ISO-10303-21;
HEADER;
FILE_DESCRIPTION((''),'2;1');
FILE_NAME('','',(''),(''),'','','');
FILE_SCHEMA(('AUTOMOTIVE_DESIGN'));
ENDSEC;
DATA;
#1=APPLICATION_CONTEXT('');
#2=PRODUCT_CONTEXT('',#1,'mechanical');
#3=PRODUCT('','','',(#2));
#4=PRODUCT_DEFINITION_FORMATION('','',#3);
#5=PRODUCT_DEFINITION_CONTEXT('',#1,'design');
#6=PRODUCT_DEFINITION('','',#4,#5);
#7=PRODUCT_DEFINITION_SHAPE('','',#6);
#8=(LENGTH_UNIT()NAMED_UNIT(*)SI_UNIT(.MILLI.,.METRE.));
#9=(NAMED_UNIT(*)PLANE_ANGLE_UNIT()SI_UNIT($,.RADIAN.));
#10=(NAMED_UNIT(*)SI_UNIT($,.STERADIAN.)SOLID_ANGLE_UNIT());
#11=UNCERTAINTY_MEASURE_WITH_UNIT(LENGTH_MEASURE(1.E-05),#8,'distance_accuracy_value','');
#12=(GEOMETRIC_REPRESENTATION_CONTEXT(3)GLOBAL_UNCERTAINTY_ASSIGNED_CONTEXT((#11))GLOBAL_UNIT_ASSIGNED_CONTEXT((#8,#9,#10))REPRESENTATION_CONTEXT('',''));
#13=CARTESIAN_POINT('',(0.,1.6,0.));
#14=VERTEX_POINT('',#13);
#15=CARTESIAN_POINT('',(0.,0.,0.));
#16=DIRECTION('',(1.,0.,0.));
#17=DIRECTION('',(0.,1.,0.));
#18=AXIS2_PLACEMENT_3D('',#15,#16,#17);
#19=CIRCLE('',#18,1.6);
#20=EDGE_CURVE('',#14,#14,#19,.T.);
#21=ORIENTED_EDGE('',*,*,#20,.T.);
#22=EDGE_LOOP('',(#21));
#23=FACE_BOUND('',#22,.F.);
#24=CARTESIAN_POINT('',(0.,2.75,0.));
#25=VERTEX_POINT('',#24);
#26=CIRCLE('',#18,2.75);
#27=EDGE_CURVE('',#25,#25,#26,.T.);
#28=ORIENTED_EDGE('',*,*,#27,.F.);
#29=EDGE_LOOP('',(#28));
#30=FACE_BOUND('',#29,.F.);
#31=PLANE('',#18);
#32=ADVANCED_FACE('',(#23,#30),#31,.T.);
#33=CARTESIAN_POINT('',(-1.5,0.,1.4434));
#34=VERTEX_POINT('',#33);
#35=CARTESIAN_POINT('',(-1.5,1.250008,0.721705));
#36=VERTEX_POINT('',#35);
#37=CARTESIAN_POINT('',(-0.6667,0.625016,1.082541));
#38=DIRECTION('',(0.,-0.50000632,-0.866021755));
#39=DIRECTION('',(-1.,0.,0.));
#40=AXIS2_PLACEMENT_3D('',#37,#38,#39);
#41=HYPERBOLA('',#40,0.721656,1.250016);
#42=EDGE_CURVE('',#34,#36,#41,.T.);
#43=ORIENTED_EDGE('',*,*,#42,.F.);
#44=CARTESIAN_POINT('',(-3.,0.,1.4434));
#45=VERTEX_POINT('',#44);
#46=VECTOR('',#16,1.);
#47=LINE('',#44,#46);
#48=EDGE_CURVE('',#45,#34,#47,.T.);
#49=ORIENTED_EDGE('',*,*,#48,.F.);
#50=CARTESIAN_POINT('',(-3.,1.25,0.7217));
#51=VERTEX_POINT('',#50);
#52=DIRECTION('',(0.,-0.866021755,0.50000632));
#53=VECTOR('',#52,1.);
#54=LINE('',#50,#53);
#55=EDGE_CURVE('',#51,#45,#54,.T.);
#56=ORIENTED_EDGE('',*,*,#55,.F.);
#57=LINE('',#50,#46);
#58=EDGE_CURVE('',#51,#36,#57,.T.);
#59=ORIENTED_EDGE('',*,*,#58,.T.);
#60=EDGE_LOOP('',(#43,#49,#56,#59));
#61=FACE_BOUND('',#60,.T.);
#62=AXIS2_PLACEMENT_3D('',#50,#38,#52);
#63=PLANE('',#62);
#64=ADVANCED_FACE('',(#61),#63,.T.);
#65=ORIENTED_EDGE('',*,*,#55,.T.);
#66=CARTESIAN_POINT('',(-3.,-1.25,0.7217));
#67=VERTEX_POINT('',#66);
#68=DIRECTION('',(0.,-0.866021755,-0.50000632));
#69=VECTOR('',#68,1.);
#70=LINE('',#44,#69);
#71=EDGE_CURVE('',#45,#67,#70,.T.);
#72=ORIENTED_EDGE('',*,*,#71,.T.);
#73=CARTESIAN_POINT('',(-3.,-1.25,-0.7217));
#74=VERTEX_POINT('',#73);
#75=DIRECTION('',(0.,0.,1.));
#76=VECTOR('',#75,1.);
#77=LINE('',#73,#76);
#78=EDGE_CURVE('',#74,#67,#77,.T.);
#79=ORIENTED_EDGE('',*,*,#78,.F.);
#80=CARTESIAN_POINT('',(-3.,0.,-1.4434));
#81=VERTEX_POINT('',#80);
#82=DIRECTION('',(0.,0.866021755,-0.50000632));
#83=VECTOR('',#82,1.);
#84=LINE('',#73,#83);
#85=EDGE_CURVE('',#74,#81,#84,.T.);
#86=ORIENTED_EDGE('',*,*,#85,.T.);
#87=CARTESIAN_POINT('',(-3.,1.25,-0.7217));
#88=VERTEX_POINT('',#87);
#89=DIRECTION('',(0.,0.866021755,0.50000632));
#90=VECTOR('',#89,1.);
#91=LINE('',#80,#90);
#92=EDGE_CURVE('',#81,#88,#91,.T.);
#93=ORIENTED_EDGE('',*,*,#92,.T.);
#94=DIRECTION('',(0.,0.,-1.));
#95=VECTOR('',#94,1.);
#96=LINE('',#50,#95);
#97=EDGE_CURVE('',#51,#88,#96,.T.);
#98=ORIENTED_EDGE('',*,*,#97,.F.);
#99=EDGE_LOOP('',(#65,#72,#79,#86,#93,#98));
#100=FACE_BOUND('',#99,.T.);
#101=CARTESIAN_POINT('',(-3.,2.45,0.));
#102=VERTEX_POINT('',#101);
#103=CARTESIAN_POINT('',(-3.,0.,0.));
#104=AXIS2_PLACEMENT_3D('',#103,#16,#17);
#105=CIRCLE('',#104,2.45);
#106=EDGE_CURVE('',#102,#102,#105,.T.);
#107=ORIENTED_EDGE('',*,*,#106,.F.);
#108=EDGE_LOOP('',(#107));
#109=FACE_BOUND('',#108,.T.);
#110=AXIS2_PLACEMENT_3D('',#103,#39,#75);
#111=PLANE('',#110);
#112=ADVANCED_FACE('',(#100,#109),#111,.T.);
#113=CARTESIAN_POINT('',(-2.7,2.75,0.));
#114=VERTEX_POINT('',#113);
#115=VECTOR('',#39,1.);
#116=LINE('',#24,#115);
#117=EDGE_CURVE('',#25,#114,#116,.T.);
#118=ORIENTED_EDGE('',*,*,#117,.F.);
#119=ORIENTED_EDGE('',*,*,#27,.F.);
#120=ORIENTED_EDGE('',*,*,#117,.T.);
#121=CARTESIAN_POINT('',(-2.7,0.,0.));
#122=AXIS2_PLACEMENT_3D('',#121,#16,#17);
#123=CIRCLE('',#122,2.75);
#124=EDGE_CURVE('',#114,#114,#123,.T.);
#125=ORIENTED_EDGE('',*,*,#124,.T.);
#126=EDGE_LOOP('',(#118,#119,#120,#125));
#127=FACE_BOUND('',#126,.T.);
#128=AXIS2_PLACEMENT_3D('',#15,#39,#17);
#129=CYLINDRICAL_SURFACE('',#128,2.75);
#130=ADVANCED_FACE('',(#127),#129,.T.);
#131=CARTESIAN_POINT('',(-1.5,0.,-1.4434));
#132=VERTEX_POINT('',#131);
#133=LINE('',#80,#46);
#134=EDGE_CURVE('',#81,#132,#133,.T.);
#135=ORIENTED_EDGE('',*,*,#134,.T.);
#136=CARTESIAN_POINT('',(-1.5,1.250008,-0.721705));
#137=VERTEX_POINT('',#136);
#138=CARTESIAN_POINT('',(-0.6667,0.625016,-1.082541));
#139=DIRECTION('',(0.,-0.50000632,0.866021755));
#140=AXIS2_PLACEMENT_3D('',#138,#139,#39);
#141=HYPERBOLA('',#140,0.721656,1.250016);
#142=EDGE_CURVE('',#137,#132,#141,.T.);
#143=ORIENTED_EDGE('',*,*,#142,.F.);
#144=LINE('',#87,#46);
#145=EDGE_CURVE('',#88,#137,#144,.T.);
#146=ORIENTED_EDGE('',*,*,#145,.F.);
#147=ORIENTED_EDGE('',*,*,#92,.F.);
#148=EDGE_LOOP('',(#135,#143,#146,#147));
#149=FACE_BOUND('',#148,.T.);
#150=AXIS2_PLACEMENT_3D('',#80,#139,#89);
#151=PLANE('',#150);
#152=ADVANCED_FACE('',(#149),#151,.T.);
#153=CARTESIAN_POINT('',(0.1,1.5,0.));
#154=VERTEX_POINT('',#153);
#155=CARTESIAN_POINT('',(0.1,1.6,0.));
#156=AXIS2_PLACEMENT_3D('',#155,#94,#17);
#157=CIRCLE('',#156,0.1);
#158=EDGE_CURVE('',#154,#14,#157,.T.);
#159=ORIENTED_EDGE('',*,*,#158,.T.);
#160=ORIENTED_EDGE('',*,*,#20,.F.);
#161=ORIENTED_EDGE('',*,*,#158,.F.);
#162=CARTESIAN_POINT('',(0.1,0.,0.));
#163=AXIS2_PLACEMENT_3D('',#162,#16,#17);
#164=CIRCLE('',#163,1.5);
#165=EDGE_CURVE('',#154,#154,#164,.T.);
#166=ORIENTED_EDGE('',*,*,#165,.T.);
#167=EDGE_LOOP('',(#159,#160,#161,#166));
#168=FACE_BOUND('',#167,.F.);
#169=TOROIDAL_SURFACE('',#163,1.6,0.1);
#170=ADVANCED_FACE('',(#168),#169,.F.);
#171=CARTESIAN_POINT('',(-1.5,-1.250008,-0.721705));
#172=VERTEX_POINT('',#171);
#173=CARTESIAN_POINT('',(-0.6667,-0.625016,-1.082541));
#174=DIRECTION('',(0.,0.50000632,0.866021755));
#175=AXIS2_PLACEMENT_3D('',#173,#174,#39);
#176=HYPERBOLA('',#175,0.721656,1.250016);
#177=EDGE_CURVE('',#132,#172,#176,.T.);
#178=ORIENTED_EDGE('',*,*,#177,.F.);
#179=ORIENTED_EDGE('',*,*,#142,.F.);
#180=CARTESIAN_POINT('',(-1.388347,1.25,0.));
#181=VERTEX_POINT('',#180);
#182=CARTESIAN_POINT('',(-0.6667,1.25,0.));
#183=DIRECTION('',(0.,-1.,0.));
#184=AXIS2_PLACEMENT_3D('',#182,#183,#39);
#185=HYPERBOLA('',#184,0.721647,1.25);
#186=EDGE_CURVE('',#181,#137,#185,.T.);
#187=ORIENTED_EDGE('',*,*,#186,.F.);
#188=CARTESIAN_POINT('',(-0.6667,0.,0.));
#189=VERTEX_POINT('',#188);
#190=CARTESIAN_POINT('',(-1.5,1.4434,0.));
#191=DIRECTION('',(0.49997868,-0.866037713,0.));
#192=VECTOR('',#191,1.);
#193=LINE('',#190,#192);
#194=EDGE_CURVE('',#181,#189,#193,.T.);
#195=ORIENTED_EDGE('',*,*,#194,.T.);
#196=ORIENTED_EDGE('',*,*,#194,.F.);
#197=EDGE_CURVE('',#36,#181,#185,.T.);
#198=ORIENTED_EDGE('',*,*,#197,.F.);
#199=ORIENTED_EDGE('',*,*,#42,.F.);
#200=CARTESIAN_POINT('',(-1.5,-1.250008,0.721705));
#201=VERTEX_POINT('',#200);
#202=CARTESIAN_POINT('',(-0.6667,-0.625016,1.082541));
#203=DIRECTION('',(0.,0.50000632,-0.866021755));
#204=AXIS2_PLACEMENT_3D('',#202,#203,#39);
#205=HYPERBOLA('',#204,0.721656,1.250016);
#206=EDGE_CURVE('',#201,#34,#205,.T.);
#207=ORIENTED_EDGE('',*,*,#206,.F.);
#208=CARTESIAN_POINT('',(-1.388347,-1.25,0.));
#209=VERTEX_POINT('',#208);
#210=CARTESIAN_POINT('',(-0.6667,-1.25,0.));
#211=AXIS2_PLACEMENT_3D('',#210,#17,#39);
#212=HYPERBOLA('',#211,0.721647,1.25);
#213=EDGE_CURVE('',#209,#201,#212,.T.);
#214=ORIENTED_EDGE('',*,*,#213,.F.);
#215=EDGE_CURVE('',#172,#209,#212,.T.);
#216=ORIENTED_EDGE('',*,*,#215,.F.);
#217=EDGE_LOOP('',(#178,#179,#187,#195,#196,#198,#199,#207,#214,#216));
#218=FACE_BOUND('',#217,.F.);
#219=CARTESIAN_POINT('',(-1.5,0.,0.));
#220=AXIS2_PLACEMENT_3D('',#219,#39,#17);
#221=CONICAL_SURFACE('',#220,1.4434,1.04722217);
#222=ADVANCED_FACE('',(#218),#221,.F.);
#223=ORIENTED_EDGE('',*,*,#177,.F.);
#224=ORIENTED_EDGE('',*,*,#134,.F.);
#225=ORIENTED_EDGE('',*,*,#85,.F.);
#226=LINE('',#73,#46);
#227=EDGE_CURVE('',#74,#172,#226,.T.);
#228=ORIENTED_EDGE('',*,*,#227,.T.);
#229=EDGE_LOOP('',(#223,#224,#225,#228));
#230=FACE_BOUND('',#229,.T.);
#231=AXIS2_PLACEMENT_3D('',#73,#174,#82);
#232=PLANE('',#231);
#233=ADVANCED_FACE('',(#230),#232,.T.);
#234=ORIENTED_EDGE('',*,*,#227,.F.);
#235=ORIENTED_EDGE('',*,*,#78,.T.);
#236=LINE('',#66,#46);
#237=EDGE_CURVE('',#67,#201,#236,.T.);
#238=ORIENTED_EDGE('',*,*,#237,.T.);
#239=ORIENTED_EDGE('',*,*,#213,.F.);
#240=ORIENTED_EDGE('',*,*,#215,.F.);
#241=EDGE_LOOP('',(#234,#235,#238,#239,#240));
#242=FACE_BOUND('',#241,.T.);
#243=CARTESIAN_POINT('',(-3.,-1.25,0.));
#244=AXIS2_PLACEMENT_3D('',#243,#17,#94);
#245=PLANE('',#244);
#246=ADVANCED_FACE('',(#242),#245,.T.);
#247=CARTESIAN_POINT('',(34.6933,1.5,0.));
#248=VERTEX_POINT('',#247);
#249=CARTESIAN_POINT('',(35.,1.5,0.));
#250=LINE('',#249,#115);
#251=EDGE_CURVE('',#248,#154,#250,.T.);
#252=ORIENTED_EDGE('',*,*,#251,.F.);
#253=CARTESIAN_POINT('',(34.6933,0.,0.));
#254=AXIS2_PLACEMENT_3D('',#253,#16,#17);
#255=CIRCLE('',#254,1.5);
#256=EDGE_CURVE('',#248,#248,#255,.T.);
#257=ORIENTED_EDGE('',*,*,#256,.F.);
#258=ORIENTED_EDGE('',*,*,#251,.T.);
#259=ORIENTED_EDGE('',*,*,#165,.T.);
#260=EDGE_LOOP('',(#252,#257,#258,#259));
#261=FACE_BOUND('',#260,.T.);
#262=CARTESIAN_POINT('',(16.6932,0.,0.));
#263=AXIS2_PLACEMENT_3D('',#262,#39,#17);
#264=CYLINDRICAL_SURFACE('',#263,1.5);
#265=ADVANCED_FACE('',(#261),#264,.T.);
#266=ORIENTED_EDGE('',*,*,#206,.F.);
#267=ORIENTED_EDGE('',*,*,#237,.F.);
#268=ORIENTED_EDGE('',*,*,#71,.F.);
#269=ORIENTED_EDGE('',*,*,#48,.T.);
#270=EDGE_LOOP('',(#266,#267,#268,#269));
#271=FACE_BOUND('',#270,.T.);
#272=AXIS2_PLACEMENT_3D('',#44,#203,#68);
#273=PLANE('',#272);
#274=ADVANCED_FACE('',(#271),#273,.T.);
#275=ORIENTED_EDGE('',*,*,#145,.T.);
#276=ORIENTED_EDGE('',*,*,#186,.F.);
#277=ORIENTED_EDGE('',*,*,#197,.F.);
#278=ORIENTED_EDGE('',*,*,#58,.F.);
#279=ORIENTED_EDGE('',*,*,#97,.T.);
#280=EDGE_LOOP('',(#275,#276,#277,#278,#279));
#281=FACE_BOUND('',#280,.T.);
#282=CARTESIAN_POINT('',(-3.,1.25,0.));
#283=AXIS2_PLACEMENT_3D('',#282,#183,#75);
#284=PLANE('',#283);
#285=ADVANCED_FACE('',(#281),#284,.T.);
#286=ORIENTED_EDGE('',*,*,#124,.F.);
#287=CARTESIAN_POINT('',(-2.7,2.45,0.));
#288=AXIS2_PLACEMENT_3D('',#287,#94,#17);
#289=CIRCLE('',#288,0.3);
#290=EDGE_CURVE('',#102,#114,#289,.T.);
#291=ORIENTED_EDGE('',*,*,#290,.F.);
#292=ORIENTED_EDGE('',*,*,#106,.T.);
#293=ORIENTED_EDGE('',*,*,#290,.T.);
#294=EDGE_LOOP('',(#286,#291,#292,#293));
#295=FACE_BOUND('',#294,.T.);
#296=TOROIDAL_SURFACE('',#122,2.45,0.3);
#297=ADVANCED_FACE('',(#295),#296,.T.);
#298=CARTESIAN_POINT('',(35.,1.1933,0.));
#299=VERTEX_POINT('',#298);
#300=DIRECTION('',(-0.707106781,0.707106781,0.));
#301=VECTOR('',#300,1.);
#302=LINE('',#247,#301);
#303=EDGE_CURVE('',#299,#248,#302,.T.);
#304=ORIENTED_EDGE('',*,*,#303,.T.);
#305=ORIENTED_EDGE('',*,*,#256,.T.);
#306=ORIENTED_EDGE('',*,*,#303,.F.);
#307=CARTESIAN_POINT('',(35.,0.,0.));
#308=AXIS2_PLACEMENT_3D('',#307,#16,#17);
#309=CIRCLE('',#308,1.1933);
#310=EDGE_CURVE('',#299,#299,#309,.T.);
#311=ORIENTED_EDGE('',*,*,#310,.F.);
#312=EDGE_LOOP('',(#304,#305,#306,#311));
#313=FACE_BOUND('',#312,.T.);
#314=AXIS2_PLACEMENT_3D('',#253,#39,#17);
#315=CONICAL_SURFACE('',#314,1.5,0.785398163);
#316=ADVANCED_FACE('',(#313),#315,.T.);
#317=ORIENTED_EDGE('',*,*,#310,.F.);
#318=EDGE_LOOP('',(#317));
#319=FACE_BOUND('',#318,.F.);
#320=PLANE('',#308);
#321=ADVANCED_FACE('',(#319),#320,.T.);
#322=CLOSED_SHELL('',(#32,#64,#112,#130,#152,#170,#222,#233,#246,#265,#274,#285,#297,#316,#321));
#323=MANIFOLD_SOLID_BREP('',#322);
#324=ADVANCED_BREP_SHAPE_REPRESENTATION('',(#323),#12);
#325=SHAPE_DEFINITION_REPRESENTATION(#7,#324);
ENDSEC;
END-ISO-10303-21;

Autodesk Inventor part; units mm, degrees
ref_plane "YZ Plane" through (0, 0, 0) normal (1, 0, 0) x (0, 1, 0)
ref_plane "XZ Plane" through (0, 0, 0) normal (0, 1, 0) x (-1, 0, 0)
sketch "Sketch1" plane through (0, 0, 0) normal (0, 0, 1) x (1, 0, 0)
  line L0 (-0.6667, 0) -> (35, 0)
  line L1 (35, 0) -> (35, 1.5)
  line L2 (35, 1.5) -> (17, 1.5)
  line L3 (17, 1.5) -> (16.6932, 1.5)
  line L4 (16.6932, 1.5) -> (0, 1.5)
  line L5 (0, 1.5) -> (0, 2.75)
  line L6 (0, 2.75) -> (-3, 2.75)
  line L7 (-3, 2.75) -> (-3, 1.4434)
  line L8 (-3, 1.4434) -> (-1.5, 1.4434)
  line L9 (-1.5, 1.4434) -> (-0.6667, 0)
  line L10 (-10.6, 0) -> (42.6, 0) projected
  line L11 (0, -0.55) -> (0, 3.3) projected
  line L12 (17, 1.5) -> (0, 1.5) construction
  dimension "d1" = 18
  dimension "d2" = 0.3068
  dimension "d3" = 3
  dimension "d4" = 1.5
  dimension "d5" = 60
  dimension "d6" = 3
  dimension "d7" = 3
  dimension "d8" = 2.8868
  dimension "d9" = 5.5
  dimension "d26" = 35
revolve "Body" add sketch "Sketch1" angle 360 about axis through (-0.6667, 0, 0) along (1, 0, 0)
sketch "Sketch2" plane through (-3, 0, 0) normal (-1, 0, 0) x (0, 0, 1)
  circle A0 centre (0, 0) radius 1.4434 projected
  line L0 (0, -3.85) -> (0, 3.85) projected
  line L1 (-3.85, 0) -> (3.85, 0) projected
  line L2 (1.4434, 0) -> (0.7217, -1.25)
  line L3 (0.7217, -1.25) -> (-0.7217, -1.25)
  line L4 (-0.7217, -1.25) -> (-1.4434, 0)
  line L5 (-1.4434, 0) -> (-0.7217, 1.25)
  line L6 (-0.7217, 1.25) -> (0.7217, 1.25)
  line L7 (0.7217, 1.25) -> (1.4434, 0)
extrude "Slot" add sketch "Sketch2" against normal up to next contours L7 A0 | A0 L2 | L6 L0 A0 | A0 L0 L3 | L0 L6 A0 | A0 L3 L0 | L4 A0 | A0 L5
fillet "Fillet1" radius 0.3 1 edges at (-3, -2.75, 0)
thread "Thread" size "M3x0.5" class "6g" standard "ISO Metric profile" length 18
chamfer "Chamfer1" distance 0.3067 distance2 0.3067 1 edges at (35, -1.5, 0) measured on face at (35, -0.8773, -0.3972)
ref_plane "Work Plane1" through (29, 0, 0) normal (0, -1, 0) x (1, 0, 0)
fillet "Fillet2" radius 0.1 1 edges at (0, -1.5, 0)
equation "\"d30\" = R"
equation "\"d17\" = RR"
equation "\"d13\" = GEL"
equation "\"d15\" = -0.5 * SPD + 0.5 * GD"
equation "\"d16\" = GUL"
equation "\"d1\" = GEL"
equation "\"d3\" = KOH"
equation "\"d4\" = INTI"
equation "\"d6\" = GD"
equation "\"d7\" = BDM"
equation "\"d8\" = 1.1547 * SW"
equation "\"d9\" = KOD"
equation "\"d26\" = NLG"
equation "\"GD\" = NND"
equation "\"NLG\" = 35"
equation "\"GEL\" = 18"
equation "\"KOD\" = 5.5"
equation "\"KOH\" = NND"
equation "\"INTI\" = 1.5"
equation "\"GAL\" = 0.61345 * PTC"
equation "\"GUL\" = 0.61345 * PTC"
equation "\"BDM\" = NND"
equation "\"SW\" = 2.5"
equation "\"RR\" = 0.3"
equation "\"SPD\" = NND - 1.2269 * PTC"
equation "\"R\" = 0.1"
equation "\"PHH\" = 0.1 * NND"
equation "\"GD1\" = THREADDIA - 1.2269 * PTC"
equation "\"THREADDIA\" = 3"
equation "\"FAWI\" = 45deg"
equation "\"PTC\" = 0.5"
equation "\"NND\" = 3"
equation "\"FAWI1\" = 30deg"
equation "\"TOA\" = 30deg"
equation "\"E0\" = 1.155 * SW"
properties part number "Unbrako - M3 x 35" material "Steel, Mild"
